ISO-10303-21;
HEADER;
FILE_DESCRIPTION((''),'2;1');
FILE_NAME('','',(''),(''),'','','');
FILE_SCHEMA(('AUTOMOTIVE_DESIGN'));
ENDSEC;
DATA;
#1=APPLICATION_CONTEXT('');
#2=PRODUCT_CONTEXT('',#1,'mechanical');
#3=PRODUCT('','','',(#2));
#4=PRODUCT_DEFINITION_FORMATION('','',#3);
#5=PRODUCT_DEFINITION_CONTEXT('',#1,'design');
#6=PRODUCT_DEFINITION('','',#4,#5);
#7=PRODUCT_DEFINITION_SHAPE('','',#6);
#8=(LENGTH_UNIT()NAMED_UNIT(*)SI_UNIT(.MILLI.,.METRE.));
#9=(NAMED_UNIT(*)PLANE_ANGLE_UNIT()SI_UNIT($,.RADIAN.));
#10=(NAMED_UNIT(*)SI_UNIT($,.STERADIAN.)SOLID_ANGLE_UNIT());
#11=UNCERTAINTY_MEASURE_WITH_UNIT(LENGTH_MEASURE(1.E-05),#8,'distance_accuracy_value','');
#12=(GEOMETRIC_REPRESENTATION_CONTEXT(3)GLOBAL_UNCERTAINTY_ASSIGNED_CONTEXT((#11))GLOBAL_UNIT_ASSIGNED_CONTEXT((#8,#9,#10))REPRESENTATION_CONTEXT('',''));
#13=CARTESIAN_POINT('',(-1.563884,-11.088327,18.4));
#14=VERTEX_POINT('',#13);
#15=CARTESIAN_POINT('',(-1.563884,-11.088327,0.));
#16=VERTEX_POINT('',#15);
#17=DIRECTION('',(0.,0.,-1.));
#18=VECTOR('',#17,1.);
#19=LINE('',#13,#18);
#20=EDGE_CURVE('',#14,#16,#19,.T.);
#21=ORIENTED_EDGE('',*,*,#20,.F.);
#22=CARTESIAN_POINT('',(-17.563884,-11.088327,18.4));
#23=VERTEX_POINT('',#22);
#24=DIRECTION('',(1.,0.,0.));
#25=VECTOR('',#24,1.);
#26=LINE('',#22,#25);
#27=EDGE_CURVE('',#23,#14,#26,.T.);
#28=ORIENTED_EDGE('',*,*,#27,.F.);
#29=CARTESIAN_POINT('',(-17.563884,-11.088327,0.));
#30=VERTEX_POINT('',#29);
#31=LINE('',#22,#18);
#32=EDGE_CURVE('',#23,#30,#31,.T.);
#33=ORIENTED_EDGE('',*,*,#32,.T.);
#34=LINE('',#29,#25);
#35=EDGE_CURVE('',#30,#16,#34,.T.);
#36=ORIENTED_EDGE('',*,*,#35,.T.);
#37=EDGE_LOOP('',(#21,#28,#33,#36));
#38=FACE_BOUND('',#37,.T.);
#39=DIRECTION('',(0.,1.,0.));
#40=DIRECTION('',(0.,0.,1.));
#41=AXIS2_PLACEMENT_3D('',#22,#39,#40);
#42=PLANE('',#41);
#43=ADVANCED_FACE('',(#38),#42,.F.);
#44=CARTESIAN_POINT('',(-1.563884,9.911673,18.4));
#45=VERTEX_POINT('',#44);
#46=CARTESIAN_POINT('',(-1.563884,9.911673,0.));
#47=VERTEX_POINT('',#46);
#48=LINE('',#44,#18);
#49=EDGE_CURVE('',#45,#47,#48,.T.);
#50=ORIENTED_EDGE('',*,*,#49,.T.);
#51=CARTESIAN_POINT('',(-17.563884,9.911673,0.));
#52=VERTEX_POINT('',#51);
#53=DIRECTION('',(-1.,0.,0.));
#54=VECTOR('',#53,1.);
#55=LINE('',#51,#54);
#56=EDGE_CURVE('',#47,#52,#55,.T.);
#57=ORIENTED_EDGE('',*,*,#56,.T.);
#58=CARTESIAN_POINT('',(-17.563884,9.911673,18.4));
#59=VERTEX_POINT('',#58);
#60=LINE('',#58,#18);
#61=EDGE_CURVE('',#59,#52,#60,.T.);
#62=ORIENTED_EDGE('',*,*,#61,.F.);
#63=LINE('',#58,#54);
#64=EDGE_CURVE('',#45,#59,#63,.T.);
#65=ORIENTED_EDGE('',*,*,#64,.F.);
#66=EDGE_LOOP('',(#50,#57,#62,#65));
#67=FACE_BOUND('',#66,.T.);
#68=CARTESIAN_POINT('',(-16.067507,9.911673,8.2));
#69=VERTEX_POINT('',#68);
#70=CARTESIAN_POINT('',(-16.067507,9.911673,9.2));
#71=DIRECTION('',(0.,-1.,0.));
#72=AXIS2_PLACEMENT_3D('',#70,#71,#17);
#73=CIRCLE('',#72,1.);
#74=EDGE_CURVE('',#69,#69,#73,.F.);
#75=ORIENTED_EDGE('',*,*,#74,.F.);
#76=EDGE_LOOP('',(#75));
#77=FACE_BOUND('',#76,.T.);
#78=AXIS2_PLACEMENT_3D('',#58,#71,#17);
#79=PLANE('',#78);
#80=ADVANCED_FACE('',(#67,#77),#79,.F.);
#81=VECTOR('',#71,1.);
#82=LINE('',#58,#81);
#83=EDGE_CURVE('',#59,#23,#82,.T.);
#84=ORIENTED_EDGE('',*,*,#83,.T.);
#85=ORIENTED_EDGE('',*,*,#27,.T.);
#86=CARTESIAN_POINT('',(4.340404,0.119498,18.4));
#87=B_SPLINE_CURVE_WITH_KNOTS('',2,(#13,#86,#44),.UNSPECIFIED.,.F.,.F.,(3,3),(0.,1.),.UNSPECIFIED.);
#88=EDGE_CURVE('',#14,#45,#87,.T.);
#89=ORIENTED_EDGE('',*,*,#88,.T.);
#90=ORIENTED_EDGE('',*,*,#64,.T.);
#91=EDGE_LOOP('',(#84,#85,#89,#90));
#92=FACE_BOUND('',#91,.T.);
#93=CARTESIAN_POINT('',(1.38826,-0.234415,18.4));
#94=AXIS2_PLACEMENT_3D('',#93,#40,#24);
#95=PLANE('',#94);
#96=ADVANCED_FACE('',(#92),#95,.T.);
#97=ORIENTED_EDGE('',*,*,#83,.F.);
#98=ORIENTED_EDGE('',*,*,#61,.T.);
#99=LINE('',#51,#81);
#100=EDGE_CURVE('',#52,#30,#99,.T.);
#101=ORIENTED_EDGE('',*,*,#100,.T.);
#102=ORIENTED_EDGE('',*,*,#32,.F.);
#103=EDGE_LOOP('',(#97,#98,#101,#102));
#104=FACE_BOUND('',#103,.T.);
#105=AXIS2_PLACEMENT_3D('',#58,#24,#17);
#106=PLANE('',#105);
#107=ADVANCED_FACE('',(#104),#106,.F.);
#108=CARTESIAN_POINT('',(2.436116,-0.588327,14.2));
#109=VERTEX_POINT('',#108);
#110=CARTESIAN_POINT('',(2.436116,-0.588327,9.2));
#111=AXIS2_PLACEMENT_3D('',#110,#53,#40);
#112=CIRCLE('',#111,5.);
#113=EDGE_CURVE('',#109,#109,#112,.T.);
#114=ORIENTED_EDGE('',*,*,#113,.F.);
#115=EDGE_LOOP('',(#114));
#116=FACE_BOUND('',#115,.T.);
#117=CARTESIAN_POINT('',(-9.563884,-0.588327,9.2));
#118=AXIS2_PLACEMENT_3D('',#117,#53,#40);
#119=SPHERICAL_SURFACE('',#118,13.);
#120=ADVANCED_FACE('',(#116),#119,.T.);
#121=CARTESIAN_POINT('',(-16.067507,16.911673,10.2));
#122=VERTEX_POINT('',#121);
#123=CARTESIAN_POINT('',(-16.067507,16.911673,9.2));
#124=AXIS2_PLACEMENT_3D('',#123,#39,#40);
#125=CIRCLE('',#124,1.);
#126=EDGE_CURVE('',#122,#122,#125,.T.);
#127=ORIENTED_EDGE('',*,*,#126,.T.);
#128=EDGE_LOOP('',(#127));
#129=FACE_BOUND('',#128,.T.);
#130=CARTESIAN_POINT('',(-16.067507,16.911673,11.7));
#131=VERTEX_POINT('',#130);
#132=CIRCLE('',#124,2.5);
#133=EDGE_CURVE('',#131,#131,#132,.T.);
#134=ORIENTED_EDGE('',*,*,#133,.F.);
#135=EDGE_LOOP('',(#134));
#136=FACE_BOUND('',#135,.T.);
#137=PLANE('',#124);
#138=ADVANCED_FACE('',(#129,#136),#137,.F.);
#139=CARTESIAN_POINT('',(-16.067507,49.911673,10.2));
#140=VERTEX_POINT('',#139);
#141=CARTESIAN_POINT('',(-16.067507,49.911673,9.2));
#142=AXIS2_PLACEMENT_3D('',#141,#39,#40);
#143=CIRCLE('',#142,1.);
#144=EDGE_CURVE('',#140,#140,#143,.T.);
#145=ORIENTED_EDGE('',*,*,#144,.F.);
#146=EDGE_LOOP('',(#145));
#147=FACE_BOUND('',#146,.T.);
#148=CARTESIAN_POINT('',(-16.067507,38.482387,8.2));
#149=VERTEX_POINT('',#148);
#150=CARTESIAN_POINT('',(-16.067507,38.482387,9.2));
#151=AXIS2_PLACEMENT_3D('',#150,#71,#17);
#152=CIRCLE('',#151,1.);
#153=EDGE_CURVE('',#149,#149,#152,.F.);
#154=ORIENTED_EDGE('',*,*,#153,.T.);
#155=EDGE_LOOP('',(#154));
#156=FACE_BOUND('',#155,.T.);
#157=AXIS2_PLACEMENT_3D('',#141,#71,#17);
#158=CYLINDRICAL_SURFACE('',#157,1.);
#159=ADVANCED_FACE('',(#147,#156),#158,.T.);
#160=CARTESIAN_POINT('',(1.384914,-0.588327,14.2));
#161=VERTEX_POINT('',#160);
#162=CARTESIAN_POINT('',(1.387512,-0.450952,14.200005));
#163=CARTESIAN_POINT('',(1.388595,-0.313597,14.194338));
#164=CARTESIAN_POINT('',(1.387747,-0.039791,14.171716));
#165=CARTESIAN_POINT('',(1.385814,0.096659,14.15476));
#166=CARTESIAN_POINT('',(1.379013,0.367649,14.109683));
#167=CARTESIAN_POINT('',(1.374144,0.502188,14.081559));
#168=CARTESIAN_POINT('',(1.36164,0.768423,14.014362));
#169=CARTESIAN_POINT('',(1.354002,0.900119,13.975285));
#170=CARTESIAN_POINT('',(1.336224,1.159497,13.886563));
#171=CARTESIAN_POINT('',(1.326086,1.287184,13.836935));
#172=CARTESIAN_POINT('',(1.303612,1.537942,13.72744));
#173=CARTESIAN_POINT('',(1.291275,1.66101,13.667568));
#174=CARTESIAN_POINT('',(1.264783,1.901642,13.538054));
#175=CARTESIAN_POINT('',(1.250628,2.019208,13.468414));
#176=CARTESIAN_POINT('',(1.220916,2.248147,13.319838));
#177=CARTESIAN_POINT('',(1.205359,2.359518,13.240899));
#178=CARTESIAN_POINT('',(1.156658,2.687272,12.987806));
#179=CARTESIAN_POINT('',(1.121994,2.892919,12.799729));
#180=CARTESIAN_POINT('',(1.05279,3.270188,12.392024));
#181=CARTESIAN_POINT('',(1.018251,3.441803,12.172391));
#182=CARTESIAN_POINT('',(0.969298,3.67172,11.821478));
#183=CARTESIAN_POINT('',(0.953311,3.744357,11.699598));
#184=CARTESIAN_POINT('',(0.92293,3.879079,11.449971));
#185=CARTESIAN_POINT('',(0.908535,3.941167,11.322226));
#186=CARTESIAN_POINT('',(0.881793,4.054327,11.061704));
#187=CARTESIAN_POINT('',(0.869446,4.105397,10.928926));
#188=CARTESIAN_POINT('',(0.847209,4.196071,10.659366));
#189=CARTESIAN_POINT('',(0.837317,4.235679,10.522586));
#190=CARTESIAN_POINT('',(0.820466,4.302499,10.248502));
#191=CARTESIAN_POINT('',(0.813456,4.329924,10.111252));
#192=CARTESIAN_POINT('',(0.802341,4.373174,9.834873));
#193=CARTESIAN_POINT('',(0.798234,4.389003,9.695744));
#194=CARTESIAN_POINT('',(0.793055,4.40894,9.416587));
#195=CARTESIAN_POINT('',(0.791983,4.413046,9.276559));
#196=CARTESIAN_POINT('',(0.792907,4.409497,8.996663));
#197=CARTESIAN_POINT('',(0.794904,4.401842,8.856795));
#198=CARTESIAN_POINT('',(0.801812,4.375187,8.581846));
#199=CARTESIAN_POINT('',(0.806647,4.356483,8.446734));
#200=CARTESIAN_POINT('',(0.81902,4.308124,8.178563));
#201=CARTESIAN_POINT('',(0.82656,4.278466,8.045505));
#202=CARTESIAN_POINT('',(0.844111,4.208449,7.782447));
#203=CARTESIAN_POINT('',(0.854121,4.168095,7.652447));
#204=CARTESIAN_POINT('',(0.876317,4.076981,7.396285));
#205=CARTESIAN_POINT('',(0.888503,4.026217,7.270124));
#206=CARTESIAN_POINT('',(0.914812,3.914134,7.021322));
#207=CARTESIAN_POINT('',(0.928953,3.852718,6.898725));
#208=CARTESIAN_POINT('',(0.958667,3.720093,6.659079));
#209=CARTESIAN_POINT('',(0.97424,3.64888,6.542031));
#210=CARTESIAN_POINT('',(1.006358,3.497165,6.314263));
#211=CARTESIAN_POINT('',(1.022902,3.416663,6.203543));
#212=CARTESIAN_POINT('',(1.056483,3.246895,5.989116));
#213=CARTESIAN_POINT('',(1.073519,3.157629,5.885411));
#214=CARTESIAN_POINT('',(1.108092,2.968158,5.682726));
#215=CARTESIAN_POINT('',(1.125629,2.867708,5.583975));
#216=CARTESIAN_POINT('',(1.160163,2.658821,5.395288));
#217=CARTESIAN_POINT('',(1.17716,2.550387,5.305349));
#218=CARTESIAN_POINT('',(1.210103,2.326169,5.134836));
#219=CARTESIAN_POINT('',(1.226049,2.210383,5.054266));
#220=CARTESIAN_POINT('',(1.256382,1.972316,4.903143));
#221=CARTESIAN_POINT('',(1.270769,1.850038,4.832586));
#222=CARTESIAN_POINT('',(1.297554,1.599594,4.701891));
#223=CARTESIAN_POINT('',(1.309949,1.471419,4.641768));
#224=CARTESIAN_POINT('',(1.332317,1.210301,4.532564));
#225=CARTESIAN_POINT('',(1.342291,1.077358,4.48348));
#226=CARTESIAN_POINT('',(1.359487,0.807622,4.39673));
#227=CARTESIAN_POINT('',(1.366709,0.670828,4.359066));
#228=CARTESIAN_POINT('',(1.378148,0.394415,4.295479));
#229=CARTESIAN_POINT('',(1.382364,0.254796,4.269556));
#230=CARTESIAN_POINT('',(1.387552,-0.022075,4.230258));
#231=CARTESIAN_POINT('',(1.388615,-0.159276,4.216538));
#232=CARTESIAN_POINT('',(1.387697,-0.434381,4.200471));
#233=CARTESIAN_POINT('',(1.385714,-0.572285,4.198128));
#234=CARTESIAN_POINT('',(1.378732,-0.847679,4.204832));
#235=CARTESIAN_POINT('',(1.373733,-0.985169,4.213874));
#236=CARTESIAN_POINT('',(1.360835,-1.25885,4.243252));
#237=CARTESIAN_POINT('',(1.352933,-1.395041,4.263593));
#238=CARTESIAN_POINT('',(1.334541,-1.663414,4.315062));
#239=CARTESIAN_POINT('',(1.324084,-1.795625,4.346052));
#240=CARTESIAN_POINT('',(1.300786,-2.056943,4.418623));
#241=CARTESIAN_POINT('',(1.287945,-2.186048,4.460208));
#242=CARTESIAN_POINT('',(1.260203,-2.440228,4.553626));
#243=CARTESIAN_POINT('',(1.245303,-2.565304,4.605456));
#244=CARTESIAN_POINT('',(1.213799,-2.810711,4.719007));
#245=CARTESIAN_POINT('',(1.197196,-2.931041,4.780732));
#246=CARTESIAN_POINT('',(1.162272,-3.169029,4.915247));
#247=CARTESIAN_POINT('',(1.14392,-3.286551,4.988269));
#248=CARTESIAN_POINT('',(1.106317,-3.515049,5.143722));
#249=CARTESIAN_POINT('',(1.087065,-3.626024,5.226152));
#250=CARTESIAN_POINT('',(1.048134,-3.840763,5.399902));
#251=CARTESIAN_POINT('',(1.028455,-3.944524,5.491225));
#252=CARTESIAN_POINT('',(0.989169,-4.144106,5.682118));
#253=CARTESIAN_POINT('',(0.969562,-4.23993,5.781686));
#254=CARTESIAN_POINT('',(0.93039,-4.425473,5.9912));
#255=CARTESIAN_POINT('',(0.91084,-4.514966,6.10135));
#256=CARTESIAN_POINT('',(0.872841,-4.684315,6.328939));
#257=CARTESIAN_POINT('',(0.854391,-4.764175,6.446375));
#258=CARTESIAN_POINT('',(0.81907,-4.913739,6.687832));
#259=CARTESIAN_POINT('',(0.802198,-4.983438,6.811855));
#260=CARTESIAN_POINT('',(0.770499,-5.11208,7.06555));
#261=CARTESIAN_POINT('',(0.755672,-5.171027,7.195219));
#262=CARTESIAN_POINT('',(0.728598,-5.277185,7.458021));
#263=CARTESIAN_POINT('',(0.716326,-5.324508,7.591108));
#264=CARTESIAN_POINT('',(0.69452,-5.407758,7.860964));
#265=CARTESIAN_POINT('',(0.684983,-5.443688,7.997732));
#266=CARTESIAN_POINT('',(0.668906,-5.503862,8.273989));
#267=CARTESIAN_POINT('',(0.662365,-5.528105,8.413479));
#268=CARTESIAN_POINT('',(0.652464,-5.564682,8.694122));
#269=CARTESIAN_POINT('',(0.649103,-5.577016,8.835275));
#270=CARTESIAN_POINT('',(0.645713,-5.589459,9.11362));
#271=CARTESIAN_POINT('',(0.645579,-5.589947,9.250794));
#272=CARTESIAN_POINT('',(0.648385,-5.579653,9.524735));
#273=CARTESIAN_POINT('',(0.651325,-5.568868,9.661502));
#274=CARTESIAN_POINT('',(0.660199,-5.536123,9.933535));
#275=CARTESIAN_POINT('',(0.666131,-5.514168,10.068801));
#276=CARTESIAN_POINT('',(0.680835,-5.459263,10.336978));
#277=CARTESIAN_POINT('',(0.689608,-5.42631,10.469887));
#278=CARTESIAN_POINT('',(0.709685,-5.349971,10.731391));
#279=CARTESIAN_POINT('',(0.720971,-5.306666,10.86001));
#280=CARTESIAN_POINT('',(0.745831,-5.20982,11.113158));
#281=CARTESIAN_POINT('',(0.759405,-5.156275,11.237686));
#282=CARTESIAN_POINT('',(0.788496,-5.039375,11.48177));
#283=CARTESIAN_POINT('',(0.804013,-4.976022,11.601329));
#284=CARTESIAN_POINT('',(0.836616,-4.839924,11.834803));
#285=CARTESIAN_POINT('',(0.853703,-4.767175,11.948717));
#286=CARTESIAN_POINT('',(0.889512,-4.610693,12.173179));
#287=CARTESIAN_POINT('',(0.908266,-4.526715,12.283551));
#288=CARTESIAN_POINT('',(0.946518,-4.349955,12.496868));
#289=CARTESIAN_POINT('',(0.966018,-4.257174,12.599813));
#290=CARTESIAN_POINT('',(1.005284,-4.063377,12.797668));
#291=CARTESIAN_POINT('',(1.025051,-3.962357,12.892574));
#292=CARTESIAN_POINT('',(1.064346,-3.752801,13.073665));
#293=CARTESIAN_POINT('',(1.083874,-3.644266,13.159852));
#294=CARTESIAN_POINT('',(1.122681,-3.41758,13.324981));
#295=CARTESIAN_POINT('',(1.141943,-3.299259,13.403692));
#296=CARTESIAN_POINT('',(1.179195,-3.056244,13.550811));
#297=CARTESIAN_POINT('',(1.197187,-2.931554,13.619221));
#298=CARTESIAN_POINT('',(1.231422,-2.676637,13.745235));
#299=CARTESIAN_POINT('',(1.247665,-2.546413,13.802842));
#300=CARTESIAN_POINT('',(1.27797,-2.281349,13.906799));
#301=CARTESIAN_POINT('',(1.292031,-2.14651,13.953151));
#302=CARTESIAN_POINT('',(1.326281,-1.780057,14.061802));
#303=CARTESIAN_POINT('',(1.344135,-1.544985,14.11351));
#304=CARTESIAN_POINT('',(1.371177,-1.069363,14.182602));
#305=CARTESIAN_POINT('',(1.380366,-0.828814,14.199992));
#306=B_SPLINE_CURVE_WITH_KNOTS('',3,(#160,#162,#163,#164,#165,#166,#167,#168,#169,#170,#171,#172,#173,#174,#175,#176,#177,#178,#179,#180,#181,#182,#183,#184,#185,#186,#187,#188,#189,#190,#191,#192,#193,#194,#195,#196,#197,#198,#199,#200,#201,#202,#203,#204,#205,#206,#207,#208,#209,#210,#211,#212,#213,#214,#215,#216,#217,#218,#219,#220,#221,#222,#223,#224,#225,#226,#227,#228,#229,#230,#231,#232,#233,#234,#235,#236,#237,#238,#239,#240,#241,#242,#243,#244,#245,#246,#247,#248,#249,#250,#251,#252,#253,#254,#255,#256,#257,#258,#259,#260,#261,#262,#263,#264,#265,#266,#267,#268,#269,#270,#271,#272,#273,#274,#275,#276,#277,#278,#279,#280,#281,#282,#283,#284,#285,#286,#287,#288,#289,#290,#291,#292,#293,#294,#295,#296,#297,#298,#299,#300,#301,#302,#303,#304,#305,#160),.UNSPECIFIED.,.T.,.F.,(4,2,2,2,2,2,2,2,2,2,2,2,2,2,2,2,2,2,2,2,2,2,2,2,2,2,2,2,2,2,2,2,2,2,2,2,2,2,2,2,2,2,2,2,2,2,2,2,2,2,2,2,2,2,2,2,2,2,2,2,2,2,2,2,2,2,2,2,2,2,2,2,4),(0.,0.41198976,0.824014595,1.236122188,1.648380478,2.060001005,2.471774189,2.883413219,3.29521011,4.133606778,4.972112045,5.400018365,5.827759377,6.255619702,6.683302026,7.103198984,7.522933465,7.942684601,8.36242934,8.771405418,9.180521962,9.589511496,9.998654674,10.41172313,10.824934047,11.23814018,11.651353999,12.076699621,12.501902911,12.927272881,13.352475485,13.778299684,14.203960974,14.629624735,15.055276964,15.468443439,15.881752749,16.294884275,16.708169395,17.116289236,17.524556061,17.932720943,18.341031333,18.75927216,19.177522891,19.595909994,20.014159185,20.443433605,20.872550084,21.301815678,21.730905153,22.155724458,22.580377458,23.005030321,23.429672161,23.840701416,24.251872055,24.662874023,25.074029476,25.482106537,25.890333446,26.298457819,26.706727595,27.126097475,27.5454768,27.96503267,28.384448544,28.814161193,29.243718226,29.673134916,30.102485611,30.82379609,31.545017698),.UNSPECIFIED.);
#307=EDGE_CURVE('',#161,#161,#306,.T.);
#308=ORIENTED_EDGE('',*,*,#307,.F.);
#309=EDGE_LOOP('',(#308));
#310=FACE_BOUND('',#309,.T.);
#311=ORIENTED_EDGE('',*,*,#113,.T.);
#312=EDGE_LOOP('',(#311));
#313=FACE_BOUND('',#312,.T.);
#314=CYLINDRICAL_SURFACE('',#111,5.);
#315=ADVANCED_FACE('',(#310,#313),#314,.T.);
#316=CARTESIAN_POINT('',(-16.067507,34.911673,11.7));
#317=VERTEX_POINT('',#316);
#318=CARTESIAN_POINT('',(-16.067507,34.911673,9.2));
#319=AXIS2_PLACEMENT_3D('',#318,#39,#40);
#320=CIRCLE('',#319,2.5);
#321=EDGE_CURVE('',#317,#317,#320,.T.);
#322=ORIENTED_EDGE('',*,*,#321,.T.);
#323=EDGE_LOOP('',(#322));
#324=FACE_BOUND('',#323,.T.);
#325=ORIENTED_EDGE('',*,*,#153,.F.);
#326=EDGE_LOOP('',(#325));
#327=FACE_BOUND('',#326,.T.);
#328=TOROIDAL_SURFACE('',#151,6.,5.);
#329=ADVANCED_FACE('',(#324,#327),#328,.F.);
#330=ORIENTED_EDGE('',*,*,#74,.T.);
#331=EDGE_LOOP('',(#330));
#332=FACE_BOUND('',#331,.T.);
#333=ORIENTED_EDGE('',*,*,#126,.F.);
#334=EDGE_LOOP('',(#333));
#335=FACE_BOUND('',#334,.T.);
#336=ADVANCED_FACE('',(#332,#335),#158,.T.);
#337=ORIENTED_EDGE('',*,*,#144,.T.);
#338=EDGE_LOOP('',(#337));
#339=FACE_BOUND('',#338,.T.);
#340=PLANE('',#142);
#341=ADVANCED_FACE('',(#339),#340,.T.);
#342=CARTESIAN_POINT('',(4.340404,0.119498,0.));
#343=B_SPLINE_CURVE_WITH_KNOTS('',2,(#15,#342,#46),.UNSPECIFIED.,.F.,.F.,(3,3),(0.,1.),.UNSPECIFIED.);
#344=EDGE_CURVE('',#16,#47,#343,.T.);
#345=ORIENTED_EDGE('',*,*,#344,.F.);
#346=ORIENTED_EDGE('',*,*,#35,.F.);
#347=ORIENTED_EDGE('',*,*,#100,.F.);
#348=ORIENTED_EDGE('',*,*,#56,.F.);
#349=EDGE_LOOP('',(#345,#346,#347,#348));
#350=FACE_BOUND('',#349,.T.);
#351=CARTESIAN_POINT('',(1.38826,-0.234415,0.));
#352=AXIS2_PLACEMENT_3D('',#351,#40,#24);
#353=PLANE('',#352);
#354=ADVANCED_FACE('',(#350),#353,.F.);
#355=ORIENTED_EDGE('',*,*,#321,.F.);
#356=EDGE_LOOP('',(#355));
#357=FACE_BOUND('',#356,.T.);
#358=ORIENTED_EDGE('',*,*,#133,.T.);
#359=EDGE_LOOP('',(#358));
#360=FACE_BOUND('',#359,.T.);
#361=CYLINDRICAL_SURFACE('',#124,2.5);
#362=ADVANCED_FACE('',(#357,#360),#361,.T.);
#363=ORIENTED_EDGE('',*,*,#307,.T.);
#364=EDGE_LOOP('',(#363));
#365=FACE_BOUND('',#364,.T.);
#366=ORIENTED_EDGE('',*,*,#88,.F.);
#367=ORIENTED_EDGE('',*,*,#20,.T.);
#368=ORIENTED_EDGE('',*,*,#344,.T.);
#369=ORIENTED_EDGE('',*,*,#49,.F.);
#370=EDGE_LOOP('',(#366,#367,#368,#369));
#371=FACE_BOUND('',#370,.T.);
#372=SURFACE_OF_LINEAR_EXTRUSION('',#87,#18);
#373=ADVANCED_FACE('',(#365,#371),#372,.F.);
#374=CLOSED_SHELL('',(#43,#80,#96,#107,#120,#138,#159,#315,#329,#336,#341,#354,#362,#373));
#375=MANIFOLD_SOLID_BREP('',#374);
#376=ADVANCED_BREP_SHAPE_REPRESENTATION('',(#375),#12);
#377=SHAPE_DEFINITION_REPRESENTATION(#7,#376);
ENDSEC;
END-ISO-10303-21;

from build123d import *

# Parameters (mm, degrees)
BOSS_EXTRUDE1_DEPTH = 18.4
SKETCH2_R           = 5
BOSS_EXTRUDE2_DEPTH = 20
DOME1_FACE_RADIUS   = 5
DOME1_HEIGHT        = 1
SKETCH3_R           = 1
BOSS_EXTRUDE3_DEPTH = 40
BOSS_EXTRUDE4_START = -15
SKETCH4_R           = 2.5
BOSS_EXTRUDE4_DEPTH = 18
FILLET1_R           = 5


with BuildPart() as part:
    # Sketch1 → Boss-Extrude1 (new body)
    with BuildSketch(Plane.XY):
        with BuildLine():
            Line((-17.563883718, 9.91167305), (-1.563883718, 9.91167305))
            add(Edge.make_bspline(
                [(-1.563883718, 9.91167305), (4.3404042, 0.119497618), (-1.563883718, -11.08832695)],
                knots=[0, 0, 0, 1, 1, 1], degree=2))
            Line((-1.563883718, -11.08832695), (-17.563883718, -11.08832695))
            Line((-17.563883718, -11.08832695), (-17.563883718, 9.91167305))
        make_face()
    extrude(amount=BOSS_EXTRUDE1_DEPTH)

    # Sketch2 → Boss-Extrude2 (add)
    with BuildSketch(Plane.ZY.offset(17.563883718)):
        with Locations((9.2, -0.58832695)):
            Circle(SKETCH2_R)
    extrude(amount=-BOSS_EXTRUDE2_DEPTH)

    # Dome1: a dome of height H over a round flat face of radius A is a cap of a sphere of radius (A * A + H * H) / (2 * H)
    dome1_r = (DOME1_FACE_RADIUS * DOME1_FACE_RADIUS + DOME1_HEIGHT * DOME1_HEIGHT) / (2 * DOME1_HEIGHT)
    dome1_base = Plane((2.436116282, -0.58832695, 9.2), z_dir=(1, 0, 0))
    with Locations(dome1_base.offset(DOME1_HEIGHT - dome1_r)):
        dome1_ball = Sphere(dome1_r, mode=Mode.PRIVATE)
    add(split(dome1_ball, bisect_by=dome1_base, keep=Keep.TOP, mode=Mode.PRIVATE))

    # Sketch3 → Boss-Extrude3 (add)
    with BuildSketch(Plane(origin=(0, 9.91167305, 0), x_dir=(1, 0, 0), z_dir=(0, 1, 0))):
        with Locations(Location((-16.067507499, -9.2, 0), (0, 0, 90))):
            Circle(SKETCH3_R)
    extrude(amount=BOSS_EXTRUDE3_DEPTH)

    # Sketch4 → Boss-Extrude4 (add)
    with BuildSketch(Plane(origin=(0, 49.91167305, 0), x_dir=(1, 0, 0), z_dir=(0, 1, 0)).offset(BOSS_EXTRUDE4_START)):
        with Locations(Location((-16.067507499, -9.2, 0), (0, 0, 270))):
            Circle(SKETCH4_R)
    extrude(amount=-BOSS_EXTRUDE4_DEPTH)

    # Fillet1
    # the kernel refuses this fillet: 5 mm, written as the material it adds along each edge
    with BuildSketch(Plane(origin=(-16.067507499, 34.91167305, 9.2), x_dir=(0, 0, -1), z_dir=(-1, 0, 0))) as fillet1_piece_1:
        with BuildLine():
            CenterArc((6, -3.570714214), FILLET1_R, 134.427004001, 45.572995999)
            Line((1, -3.570714214), (0.9, -3.570714214))
            Line((0.9, -3.570714214), (0.9, 0))
            Line((0.9, 0), (1, 0.1))
            ThreePointArc((1, 0.1), (1.75, 0.1), (2.43, 0.071414284))
            Line((2.43, 0.071414284), (2.5, 0))
        make_face()
    revolve(axis=Axis((-16.067507499, 34.91167305, 9.2), (0, -1, 0)))


solid = part.part
